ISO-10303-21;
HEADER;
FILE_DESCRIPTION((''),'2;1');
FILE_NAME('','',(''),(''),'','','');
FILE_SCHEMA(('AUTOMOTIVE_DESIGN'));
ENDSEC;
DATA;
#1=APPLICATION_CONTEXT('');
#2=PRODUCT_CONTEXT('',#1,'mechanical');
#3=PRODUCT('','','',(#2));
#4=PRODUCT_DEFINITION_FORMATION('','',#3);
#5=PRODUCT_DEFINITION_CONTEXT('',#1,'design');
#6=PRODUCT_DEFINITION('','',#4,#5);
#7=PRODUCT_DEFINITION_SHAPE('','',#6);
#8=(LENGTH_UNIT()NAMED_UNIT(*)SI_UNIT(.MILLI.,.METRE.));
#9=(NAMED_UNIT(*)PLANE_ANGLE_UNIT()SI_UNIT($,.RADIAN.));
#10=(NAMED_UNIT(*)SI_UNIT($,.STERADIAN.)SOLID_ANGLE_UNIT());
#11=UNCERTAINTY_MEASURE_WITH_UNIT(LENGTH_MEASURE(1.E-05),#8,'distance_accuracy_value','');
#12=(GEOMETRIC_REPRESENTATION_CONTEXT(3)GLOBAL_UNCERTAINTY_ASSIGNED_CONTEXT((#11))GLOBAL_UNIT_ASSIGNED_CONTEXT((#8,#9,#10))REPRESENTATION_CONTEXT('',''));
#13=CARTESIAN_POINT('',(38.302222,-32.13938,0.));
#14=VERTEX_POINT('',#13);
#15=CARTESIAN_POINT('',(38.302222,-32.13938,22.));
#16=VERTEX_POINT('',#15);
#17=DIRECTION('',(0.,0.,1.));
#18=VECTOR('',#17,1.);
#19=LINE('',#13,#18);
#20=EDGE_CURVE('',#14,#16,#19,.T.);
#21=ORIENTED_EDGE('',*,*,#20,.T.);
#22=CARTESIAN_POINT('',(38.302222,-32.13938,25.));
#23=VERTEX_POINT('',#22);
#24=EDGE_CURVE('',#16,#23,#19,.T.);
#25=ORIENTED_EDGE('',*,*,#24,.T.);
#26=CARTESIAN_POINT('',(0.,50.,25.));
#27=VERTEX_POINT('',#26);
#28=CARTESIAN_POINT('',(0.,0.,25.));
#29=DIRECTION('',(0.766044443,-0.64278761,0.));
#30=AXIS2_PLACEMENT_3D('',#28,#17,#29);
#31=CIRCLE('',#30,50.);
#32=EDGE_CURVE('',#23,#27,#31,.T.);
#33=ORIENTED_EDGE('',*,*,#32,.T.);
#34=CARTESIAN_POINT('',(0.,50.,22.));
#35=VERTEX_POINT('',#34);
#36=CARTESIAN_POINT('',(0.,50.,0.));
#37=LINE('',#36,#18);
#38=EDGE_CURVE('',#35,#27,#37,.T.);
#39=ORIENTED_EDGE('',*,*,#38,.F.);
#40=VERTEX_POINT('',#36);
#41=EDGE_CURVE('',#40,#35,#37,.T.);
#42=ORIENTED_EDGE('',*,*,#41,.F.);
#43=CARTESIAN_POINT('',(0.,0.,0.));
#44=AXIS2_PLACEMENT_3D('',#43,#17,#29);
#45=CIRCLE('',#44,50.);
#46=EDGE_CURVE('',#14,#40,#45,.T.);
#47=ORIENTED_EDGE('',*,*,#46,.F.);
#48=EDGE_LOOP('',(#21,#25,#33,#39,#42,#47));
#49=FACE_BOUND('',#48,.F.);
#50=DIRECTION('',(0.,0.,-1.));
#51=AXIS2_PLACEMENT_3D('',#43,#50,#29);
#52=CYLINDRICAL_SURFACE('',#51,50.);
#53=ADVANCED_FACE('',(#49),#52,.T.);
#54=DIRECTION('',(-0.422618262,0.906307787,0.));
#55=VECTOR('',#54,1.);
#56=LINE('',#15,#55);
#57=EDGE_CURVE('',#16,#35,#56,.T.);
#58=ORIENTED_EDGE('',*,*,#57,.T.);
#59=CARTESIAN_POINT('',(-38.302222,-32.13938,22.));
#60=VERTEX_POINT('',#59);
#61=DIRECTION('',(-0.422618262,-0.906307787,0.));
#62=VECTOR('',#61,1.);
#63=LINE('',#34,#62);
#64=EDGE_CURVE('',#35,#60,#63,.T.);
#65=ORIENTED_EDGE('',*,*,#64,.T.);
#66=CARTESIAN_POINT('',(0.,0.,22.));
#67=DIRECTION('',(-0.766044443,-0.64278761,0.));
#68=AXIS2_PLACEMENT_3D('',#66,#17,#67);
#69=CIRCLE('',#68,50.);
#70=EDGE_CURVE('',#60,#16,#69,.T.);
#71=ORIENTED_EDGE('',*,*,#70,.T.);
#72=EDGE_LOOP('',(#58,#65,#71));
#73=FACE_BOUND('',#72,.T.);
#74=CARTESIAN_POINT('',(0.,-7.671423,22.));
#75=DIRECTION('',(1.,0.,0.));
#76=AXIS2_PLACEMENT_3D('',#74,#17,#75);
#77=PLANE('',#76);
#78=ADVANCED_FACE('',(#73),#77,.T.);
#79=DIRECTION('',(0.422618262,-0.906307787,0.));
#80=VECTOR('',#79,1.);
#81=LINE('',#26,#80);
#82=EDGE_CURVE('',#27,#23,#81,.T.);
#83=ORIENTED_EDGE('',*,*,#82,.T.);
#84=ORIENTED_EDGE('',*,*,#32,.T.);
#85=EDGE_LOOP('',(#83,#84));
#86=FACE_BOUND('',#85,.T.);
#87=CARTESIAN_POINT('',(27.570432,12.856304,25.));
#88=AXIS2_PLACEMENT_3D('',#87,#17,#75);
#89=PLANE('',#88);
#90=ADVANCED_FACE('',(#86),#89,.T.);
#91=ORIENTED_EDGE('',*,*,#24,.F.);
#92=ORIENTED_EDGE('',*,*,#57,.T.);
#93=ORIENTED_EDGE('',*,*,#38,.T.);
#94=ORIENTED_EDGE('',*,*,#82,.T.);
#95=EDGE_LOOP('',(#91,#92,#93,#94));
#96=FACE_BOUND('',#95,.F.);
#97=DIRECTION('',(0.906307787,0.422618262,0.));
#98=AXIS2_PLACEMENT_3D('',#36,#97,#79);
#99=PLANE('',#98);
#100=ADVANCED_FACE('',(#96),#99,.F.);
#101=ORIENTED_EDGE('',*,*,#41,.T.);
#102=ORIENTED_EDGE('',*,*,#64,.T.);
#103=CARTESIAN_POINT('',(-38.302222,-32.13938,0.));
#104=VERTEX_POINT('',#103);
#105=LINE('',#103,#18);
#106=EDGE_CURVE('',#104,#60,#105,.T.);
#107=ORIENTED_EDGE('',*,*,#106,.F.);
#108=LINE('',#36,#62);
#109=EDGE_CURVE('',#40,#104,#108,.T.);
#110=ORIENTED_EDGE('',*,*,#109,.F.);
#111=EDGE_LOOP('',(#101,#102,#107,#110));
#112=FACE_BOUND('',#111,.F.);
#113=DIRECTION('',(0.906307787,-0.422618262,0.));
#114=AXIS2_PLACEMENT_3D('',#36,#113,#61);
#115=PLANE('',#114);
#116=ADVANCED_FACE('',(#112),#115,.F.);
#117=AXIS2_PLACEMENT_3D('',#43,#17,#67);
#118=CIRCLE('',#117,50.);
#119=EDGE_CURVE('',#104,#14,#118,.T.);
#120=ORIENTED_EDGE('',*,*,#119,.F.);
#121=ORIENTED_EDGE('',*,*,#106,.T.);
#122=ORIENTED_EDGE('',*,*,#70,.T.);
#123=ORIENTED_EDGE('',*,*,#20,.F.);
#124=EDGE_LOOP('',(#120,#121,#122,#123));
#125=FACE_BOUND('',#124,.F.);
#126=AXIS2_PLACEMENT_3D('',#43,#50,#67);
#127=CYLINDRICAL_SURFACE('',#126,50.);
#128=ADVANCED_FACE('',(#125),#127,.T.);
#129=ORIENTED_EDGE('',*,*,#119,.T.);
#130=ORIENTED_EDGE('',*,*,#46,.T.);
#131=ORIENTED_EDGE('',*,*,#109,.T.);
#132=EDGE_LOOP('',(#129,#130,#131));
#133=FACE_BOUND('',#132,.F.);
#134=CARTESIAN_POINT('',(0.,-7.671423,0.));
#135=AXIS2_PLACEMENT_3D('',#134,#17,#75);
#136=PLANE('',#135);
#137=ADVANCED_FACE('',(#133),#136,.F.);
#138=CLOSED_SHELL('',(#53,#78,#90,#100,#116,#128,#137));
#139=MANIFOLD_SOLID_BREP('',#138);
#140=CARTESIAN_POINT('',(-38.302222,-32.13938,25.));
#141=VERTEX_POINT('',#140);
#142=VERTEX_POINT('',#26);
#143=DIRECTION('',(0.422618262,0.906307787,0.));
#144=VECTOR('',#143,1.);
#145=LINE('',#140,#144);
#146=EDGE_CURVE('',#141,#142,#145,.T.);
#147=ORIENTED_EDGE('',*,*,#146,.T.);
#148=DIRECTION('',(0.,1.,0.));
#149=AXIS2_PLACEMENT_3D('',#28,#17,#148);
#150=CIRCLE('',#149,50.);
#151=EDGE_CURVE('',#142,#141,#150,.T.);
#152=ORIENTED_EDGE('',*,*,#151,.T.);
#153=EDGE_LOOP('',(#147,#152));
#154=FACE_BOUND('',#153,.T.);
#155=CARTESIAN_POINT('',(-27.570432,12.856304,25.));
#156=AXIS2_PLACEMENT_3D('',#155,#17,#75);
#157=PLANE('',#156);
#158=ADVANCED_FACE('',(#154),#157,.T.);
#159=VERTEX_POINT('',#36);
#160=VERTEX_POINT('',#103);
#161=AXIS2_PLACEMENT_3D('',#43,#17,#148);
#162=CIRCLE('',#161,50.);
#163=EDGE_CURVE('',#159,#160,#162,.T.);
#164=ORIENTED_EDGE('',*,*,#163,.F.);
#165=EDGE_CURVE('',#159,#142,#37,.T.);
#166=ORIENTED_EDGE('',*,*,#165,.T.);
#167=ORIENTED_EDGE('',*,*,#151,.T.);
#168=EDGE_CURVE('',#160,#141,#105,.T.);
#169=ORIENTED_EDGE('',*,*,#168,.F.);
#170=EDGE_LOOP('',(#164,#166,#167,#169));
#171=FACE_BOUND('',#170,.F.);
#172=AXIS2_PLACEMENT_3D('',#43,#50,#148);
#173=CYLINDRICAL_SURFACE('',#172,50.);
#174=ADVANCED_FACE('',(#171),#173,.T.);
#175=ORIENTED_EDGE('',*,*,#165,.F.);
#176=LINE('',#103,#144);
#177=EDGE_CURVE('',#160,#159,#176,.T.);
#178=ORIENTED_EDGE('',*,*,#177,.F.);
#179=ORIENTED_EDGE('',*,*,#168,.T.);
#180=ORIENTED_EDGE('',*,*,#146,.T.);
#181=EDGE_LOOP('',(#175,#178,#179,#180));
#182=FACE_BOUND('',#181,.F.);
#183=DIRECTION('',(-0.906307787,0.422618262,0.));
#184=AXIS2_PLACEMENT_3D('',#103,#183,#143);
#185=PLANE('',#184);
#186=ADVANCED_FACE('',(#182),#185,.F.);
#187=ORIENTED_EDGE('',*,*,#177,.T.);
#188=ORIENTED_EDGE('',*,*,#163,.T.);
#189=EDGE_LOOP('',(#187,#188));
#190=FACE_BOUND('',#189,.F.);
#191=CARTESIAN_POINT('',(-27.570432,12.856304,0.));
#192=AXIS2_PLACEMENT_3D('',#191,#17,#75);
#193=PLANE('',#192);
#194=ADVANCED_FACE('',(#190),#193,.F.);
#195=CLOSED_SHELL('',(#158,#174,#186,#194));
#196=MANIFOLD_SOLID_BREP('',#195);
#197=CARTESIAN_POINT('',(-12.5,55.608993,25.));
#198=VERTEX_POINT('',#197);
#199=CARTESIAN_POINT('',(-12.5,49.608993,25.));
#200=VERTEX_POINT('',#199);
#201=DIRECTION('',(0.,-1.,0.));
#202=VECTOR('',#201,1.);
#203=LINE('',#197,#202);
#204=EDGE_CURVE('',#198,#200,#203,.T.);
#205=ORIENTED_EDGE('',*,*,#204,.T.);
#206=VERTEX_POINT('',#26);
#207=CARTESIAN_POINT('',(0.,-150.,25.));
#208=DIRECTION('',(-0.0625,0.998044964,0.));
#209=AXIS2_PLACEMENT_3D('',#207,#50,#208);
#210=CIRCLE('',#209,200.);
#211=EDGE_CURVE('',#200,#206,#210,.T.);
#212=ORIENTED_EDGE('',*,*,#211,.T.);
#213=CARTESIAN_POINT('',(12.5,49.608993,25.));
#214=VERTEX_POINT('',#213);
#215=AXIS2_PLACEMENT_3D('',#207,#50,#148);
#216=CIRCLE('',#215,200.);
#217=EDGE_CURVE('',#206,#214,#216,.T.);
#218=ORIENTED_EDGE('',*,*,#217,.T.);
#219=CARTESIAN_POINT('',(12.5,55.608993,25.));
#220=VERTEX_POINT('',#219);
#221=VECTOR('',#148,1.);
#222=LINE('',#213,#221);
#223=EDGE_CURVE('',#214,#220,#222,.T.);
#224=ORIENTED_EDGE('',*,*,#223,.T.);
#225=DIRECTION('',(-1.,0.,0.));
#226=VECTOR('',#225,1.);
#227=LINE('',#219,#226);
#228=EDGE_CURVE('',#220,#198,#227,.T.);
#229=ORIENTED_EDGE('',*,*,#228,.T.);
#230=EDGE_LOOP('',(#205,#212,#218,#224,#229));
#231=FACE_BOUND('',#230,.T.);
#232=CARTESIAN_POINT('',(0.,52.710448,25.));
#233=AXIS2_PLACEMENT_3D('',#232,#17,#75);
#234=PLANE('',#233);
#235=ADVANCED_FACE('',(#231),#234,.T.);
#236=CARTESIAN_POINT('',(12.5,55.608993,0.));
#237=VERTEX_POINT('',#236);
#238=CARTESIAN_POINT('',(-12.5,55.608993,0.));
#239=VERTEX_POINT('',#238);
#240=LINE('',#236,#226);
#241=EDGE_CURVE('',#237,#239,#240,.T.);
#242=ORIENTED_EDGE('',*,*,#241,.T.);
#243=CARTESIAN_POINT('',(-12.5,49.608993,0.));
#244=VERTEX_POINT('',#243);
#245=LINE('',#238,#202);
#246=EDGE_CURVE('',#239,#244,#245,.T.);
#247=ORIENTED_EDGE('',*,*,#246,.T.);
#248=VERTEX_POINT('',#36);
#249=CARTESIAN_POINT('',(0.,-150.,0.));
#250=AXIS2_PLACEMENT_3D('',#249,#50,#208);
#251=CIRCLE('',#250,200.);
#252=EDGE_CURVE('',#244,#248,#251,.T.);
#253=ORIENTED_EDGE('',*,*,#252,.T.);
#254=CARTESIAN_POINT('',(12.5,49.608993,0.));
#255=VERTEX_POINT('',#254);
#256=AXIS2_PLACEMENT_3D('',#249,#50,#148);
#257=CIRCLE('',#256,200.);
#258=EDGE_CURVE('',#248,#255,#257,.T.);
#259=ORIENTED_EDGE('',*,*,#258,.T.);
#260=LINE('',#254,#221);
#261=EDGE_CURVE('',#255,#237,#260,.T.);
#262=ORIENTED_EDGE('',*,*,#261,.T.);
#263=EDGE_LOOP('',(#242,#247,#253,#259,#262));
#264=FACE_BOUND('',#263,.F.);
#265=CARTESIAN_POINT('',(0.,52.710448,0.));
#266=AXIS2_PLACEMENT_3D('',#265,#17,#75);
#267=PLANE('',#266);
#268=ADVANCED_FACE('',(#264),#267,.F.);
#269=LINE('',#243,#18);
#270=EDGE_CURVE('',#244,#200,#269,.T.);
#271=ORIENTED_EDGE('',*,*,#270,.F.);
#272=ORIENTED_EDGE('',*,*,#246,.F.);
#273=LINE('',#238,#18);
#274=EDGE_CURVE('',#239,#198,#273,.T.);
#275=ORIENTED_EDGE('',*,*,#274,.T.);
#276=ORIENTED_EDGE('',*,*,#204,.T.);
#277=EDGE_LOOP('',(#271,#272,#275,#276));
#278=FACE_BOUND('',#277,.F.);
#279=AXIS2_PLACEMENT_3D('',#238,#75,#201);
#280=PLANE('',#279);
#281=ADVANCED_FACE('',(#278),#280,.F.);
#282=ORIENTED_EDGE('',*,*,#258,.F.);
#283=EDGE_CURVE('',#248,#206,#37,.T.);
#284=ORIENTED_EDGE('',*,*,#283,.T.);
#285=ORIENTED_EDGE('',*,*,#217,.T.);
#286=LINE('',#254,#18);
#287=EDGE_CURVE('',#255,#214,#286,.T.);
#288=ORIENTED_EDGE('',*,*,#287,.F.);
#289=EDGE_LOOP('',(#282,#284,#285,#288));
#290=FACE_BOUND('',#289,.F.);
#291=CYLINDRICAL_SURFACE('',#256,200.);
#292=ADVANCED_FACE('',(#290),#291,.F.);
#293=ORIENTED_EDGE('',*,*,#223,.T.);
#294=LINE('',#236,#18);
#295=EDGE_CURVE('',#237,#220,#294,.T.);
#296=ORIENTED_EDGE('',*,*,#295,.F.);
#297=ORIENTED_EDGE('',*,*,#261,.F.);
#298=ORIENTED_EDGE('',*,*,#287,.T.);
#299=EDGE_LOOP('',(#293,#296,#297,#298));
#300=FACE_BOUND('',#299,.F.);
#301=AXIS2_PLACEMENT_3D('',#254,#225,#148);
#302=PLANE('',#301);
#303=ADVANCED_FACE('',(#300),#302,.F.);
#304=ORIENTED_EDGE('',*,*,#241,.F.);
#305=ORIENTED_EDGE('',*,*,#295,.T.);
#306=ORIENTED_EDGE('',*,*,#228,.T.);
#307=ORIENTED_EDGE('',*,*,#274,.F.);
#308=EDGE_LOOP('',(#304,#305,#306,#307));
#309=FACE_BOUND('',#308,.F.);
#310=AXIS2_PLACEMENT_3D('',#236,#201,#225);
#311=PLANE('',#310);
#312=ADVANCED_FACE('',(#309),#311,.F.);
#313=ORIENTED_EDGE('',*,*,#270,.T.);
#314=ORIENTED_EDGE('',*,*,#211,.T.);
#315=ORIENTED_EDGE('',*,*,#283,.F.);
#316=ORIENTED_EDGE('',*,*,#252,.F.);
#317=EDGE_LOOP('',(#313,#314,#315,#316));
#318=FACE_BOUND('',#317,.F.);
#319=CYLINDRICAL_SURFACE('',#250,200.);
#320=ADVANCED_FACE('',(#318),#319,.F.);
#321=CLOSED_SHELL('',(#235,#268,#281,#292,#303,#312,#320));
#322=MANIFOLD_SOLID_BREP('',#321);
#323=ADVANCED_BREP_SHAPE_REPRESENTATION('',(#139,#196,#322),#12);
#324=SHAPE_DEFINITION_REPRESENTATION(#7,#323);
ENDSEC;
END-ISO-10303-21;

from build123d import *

# Parameters (mm, degrees)
F1_DEPTH = 25
F2_DEPTH = 22


with BuildPart() as f1:
    # F0 (on Top) → F1 (new body)
    with BuildSketch(Plane.XY):
        with BuildLine():
            Line((-38.3022221559, -32.1393804843), (0, 50))
            ThreePointArc((0, 50), (-45.3153893518, 21.130913087), (-38.3022221559, -32.1393804843))
        make_face()
    extrude(amount=F1_DEPTH)


with BuildPart() as f1b:
    # F0 (on Top) → F1, piece 2 (new body)
    with BuildSketch(Plane.XY):
        with BuildLine():
            ThreePointArc((38.3022221559, -32.1393804843), (46.9846310393, -17.1010071663), (50, 0))
            ThreePointArc((50, 0), (35.3553390593, 35.3553390593), (0, 50))
            Line((0, 50), (38.3022221559, -32.1393804843))
        make_face()
    extrude(amount=F1_DEPTH)

    # F0 (on Top) → F2 (join)
    with BuildSketch(Plane.XY):
        with BuildLine():
            Line((38.3022221559, -32.1393804843), (0, 50))
            Line((0, 50), (-38.3022221559, -32.1393804843))
            ThreePointArc((-38.3022221559, -32.1393804843), (0, -50), (38.3022221559, -32.1393804843))
        make_face()
    extrude(amount=F2_DEPTH)


with BuildPart() as f1c:
    # F0 (on Top) → F1, piece 3 (new body)
    with BuildSketch(Plane.XY):
        with BuildLine():
            ThreePointArc((-12.5, 49.6089927834), (-6.2530569853, 49.9022242956), (0, 50))
            ThreePointArc((0, 50), (6.2530569853, 49.9022242956), (12.5, 49.6089927834))
            Line((12.5, 49.6089927834), (12.5, 55.6089927834))
            Line((12.5, 55.6089927834), (-12.5, 55.6089927834))
            Line((-12.5, 55.6089927834), (-12.5, 49.6089927834))
        make_face()
    extrude(amount=F1_DEPTH)


solid = Compound([f1.part, f1b.part, f1c.part])
